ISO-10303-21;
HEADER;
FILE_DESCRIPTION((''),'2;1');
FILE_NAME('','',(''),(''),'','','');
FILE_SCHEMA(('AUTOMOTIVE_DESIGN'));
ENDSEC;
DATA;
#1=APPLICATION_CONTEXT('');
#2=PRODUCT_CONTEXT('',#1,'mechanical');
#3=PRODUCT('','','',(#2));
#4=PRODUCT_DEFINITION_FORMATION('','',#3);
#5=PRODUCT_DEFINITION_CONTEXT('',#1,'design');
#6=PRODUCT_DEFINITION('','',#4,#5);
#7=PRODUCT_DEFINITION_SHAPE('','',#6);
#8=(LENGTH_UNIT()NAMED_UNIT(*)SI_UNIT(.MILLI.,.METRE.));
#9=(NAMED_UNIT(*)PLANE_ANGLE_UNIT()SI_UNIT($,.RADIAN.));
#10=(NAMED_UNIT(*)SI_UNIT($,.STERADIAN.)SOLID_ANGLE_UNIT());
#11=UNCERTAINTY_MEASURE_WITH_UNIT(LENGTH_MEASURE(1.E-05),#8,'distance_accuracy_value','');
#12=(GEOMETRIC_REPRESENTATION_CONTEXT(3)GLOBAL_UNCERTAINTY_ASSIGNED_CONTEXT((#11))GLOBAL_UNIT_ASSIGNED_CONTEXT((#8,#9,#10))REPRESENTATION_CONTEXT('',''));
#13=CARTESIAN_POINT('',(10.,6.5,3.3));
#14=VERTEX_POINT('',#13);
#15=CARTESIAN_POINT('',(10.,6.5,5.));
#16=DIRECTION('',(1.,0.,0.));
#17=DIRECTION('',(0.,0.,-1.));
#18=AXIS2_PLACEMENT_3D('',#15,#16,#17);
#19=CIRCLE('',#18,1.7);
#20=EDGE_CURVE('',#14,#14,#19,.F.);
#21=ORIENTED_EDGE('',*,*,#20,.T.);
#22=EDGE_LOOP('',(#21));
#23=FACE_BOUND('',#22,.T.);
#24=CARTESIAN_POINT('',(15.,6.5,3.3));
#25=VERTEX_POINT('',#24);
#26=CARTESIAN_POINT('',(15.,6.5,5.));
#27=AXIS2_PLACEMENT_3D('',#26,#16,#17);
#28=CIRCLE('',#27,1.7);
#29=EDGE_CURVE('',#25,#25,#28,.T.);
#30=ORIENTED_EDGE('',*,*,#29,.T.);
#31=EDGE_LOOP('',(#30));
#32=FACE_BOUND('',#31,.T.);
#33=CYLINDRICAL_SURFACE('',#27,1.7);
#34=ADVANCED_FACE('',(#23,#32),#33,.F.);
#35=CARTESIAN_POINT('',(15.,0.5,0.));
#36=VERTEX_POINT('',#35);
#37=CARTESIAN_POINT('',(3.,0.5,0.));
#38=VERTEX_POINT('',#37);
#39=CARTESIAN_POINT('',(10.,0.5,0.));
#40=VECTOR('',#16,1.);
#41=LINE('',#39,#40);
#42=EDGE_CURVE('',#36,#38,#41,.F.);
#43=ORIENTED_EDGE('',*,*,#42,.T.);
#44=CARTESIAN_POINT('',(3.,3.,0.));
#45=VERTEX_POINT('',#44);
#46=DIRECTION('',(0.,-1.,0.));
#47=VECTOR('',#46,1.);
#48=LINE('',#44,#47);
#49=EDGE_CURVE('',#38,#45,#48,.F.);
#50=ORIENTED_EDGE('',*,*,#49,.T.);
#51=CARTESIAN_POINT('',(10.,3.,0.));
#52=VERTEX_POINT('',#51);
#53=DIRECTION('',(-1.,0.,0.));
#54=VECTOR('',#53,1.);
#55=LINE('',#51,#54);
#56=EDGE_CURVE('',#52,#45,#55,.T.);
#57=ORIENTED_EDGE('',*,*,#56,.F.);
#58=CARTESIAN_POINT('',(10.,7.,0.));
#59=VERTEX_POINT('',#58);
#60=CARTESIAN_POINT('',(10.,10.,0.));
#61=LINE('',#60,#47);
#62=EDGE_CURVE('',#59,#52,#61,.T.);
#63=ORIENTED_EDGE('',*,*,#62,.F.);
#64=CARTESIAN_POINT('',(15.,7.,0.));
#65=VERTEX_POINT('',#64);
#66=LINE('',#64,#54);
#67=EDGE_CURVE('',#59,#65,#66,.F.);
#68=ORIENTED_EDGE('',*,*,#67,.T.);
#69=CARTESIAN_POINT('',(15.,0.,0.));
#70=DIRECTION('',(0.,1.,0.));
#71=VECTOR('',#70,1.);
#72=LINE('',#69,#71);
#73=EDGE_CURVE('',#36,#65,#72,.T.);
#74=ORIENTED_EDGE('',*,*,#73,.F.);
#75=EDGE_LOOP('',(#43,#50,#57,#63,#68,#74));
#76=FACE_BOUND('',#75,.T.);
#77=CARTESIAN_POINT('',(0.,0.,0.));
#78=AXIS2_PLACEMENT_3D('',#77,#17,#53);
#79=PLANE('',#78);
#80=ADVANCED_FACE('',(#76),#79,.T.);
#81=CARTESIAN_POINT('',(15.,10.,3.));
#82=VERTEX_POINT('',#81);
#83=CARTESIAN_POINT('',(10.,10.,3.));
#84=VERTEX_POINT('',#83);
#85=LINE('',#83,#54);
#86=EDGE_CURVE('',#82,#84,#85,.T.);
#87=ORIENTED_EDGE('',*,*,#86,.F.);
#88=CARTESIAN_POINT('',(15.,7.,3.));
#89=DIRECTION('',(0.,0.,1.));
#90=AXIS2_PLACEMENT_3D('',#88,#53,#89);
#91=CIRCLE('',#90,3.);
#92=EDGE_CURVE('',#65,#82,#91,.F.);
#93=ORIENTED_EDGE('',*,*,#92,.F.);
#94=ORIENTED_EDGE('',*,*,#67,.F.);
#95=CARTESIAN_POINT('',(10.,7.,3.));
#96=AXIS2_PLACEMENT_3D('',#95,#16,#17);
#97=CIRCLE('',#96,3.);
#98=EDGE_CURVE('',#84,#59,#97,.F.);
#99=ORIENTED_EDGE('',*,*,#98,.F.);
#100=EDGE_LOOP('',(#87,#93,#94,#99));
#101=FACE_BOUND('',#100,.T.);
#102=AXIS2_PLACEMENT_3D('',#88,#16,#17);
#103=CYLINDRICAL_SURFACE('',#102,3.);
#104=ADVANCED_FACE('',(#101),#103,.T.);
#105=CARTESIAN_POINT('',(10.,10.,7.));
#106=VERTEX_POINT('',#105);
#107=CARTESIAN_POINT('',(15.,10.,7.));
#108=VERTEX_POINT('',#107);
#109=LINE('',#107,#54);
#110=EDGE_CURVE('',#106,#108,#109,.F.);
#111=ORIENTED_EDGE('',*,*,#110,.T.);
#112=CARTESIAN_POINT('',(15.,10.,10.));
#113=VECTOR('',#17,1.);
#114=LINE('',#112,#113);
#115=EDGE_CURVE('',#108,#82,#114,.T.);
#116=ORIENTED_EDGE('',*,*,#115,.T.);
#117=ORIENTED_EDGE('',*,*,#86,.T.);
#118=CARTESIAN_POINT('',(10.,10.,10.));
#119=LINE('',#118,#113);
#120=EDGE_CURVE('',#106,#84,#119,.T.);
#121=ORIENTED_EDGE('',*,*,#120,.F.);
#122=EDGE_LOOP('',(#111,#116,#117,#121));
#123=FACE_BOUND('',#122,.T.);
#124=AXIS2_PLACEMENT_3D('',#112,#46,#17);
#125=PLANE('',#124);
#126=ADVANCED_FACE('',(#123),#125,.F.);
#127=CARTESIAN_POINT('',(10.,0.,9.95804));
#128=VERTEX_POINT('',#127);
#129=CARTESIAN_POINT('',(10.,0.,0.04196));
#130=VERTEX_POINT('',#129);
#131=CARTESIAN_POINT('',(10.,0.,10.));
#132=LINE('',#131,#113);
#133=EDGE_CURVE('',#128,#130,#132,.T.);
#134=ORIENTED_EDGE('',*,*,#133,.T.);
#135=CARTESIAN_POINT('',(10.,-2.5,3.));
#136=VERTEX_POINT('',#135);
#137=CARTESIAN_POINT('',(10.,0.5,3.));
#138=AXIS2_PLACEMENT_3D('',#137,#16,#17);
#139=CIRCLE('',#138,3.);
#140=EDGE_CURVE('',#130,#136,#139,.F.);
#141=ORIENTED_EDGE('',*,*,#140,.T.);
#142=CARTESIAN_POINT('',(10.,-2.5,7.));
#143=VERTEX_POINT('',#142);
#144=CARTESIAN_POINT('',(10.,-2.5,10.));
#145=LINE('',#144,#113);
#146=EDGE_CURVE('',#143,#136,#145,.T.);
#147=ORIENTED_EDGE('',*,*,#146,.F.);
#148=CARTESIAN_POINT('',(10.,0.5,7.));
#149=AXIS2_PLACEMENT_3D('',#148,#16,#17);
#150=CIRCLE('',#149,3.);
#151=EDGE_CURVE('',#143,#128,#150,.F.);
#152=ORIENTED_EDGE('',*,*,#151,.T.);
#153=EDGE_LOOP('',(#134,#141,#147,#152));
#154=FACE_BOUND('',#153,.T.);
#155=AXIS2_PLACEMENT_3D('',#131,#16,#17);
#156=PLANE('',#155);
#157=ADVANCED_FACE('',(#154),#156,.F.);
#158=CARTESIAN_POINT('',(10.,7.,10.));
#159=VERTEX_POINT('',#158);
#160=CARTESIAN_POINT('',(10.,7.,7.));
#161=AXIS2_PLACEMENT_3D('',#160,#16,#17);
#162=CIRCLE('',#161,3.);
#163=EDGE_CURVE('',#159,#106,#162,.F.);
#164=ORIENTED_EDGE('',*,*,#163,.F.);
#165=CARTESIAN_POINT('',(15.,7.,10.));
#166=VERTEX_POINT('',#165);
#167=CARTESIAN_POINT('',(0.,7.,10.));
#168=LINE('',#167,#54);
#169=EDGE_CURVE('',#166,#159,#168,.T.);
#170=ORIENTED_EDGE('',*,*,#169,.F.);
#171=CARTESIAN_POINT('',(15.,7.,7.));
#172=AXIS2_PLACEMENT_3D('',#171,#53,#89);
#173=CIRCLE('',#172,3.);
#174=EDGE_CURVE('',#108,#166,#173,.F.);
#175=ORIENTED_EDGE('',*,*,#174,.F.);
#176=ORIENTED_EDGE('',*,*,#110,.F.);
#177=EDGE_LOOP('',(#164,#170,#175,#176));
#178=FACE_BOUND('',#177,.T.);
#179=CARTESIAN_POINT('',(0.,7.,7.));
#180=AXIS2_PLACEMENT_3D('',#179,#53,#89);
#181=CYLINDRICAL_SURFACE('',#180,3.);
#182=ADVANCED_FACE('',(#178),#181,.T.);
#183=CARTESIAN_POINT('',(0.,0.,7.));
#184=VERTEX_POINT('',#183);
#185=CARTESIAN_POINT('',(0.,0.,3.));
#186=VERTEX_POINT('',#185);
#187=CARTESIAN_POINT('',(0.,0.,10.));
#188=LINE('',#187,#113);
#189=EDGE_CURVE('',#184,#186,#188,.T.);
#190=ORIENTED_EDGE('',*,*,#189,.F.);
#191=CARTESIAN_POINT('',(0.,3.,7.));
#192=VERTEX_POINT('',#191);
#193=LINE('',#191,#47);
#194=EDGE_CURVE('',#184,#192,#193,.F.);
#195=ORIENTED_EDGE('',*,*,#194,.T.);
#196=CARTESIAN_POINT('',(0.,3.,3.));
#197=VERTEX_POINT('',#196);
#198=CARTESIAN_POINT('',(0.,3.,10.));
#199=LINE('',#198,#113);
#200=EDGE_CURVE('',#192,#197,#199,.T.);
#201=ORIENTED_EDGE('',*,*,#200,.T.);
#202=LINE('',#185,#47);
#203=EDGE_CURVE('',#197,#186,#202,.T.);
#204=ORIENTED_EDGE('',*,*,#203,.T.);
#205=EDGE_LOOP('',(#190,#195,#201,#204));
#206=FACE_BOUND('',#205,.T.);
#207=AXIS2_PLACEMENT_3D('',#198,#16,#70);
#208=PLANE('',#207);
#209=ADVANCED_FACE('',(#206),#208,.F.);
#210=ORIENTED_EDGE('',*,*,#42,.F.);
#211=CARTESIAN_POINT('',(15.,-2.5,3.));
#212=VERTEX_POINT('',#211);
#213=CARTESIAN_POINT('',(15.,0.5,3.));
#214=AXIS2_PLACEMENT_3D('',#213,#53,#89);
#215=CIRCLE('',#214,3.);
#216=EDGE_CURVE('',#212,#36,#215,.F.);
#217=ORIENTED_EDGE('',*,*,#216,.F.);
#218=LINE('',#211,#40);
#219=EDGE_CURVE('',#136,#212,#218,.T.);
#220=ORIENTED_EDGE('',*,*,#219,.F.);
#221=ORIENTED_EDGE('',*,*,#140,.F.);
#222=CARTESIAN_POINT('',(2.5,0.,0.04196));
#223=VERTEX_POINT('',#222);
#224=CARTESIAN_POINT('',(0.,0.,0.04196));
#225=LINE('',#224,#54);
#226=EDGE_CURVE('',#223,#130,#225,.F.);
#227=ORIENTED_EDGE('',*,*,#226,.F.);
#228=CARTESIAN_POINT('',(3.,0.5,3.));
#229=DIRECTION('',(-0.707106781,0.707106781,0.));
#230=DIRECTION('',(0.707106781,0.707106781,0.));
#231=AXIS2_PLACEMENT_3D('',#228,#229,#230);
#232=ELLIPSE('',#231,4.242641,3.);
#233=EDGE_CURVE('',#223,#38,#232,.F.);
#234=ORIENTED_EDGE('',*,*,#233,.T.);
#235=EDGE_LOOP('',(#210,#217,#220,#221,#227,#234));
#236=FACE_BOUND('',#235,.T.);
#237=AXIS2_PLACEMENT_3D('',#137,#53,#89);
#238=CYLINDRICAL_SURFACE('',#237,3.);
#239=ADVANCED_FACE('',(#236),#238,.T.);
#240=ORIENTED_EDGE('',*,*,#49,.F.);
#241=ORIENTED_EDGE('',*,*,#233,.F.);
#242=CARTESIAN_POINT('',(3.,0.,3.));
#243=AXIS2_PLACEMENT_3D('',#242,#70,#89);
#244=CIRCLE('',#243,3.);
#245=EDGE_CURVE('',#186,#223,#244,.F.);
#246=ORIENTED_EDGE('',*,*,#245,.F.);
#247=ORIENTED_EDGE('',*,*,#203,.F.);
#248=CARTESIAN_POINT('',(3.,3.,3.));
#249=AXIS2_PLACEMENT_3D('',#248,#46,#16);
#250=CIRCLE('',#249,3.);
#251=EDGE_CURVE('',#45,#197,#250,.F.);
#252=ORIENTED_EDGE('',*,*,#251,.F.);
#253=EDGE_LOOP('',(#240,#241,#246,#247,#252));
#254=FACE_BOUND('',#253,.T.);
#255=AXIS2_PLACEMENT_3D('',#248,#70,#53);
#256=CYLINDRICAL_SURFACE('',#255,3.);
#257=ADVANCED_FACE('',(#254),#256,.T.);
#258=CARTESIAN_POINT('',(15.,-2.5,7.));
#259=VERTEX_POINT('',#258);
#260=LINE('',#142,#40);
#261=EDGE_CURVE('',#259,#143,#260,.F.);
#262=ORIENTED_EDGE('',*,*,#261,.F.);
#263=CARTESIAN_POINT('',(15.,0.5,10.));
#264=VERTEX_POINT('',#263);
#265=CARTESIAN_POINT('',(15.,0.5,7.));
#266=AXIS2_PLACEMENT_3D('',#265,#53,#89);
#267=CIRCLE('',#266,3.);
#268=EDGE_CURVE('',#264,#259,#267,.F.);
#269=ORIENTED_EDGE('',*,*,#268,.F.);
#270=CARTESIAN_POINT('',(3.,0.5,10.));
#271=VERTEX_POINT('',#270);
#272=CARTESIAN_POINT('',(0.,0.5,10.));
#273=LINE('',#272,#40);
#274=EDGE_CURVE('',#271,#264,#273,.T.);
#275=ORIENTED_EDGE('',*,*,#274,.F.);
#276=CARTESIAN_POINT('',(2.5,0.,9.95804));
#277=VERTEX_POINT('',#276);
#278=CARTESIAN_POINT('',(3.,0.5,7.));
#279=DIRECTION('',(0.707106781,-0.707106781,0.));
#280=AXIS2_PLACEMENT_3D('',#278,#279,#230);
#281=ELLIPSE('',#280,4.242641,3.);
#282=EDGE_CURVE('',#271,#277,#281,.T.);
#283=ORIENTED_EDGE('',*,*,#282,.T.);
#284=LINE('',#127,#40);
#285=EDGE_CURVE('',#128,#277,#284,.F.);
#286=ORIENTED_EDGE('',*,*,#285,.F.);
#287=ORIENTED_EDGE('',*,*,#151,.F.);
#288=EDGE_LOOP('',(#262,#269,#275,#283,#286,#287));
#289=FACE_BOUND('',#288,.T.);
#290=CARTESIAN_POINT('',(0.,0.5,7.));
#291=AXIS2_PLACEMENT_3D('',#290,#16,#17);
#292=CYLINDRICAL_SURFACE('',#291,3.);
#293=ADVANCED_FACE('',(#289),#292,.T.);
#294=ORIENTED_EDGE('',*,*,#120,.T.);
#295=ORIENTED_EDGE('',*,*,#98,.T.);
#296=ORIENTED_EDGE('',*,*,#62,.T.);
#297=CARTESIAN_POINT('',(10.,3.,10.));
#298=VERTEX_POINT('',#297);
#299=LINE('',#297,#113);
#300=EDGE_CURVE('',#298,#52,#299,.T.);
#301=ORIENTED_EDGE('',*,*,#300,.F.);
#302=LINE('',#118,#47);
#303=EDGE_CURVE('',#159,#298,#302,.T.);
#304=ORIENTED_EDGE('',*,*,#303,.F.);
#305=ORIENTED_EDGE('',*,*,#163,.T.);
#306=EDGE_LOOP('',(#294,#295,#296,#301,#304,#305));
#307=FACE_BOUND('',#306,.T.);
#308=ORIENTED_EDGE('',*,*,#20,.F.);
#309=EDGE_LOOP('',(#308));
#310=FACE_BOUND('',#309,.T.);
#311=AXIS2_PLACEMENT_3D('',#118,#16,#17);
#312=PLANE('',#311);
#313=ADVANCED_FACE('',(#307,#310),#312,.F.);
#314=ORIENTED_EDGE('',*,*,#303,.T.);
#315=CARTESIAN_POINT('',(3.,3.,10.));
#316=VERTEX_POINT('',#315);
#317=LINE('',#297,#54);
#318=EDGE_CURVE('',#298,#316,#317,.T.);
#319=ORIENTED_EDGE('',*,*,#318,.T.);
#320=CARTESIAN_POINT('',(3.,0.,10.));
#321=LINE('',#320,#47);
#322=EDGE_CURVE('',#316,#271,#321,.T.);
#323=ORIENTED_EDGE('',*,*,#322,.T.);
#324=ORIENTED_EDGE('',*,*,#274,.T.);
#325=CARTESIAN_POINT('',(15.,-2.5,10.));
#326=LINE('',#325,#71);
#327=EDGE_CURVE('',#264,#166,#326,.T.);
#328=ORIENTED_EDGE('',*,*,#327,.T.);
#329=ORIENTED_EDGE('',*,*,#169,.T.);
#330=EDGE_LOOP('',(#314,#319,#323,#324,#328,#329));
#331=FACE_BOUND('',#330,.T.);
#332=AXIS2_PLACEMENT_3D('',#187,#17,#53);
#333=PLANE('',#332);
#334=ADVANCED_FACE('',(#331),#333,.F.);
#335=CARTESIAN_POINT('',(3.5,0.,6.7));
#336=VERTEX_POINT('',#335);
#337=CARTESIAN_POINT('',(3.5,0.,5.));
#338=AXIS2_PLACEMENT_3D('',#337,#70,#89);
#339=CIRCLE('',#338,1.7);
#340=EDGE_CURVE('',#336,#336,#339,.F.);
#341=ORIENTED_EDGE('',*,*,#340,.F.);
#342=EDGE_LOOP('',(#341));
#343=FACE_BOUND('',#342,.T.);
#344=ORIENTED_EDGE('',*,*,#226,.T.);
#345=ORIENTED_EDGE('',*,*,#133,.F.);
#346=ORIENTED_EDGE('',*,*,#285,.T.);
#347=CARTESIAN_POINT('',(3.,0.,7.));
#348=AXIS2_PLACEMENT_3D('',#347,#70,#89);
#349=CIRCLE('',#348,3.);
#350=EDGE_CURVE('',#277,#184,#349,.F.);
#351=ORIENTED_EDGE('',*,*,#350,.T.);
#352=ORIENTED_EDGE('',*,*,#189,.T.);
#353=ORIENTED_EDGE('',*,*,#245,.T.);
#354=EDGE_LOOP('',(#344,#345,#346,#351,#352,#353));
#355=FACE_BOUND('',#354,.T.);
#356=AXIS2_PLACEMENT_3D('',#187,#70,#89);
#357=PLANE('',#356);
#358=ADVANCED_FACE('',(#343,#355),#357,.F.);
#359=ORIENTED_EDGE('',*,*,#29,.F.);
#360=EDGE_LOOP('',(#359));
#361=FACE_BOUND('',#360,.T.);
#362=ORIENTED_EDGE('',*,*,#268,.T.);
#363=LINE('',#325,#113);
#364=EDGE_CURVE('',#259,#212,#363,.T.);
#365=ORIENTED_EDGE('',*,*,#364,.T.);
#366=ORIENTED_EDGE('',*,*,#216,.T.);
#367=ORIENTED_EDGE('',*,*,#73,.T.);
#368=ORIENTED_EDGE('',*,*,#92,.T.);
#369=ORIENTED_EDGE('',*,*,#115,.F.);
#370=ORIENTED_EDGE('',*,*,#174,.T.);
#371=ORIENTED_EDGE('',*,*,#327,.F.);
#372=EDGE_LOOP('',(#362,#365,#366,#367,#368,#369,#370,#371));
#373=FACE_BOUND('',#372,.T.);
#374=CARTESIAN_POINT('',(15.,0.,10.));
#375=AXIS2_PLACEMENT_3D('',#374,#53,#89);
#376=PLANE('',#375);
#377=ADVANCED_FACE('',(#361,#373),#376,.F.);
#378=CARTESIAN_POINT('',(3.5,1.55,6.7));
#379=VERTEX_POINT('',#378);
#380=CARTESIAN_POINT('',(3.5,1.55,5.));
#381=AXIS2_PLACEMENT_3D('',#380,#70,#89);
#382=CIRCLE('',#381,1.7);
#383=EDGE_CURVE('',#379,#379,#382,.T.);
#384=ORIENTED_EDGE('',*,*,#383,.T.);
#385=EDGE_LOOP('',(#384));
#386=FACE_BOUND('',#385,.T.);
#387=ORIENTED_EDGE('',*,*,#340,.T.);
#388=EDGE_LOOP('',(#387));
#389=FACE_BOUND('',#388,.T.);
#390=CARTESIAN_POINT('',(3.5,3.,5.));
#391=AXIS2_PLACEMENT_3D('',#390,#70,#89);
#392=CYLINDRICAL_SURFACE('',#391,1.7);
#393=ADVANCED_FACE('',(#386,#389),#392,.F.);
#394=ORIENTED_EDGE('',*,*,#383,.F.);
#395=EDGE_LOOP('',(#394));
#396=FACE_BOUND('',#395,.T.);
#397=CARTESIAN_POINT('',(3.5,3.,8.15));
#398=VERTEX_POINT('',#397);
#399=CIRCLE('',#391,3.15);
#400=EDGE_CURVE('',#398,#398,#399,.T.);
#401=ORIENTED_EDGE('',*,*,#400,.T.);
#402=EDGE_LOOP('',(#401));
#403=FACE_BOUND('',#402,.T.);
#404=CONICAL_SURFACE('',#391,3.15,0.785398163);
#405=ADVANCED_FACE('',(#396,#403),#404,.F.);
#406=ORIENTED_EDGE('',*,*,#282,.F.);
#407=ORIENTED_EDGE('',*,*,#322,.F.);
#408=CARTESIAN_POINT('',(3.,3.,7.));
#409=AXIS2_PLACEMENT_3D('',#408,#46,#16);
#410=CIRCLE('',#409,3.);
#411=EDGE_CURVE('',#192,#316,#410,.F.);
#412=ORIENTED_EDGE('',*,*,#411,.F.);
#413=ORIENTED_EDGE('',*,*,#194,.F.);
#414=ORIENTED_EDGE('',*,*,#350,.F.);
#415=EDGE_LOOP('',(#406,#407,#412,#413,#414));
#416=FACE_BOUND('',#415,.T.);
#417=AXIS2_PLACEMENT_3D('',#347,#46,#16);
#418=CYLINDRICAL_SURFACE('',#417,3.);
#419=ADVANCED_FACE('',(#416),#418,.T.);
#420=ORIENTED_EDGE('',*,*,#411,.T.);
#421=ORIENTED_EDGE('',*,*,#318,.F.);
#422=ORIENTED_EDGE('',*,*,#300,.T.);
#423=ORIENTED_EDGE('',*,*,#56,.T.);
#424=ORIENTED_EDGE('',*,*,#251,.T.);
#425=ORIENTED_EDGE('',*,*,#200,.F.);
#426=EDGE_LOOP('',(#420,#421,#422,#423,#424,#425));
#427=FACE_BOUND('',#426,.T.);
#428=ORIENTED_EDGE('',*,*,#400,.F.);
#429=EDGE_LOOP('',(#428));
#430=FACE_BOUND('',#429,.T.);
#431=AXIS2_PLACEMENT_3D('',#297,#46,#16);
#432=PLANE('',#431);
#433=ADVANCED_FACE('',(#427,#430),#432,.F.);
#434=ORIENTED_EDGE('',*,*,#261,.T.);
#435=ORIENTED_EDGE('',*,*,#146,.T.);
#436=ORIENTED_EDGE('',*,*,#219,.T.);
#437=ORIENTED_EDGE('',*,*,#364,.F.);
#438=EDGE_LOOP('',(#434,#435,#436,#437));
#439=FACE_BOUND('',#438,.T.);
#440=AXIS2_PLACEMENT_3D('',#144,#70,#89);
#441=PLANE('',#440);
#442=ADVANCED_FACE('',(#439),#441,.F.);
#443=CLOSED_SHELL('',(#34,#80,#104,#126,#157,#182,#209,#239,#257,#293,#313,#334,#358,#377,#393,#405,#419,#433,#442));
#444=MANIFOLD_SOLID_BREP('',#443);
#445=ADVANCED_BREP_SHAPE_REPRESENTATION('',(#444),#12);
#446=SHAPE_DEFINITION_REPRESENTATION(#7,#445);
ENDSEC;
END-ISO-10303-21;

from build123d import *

# Parameters (mm, degrees)
BOSS_EXTRU_1_DEPTH                             = 10
ESQUISSE2_R                                    = 1.5
ENL_V_MAT_EXTRU_1_DEPTH                        = 5
ESQUISSE3_R                                    = 1.5
ENL_V_MAT_EXTRU_2_DEPTH                        = 3
D_GAGEMENT_M31_D                               = 3.4
D_GAGEMENT_M31_DEPTH                           = 5
D_GAGEMENT_M31_TIP                             = 1.021463052
FRAISAGE_POUR_VIS_T_TE_FRAIS_E_M31_D           = 3.4
FRAISAGE_POUR_VIS_T_TE_FRAIS_E_M31_DEPTH       = 3
FRAISAGE_POUR_VIS_T_TE_FRAIS_E_M31_CSINK_D     = 6.3
FRAISAGE_POUR_VIS_T_TE_FRAIS_E_M31_CSINK_ANGLE = 90
FRAISAGE_POUR_VIS_T_TE_FRAIS_E_M31_TIP         = 1.021463052
CONG_1_R                                       = 3


with BuildPart() as part:
    # Esquisse1 → Boss.-Extru.1 (new body)
    with BuildSketch(Plane.XY):
        Polygon((15, 0), (15, 10), (10, 10), (10, 3), (0, 3), (0, 0), (10, 0), (10, -2.5), (15, -2.5), align=None)
    extrude(amount=BOSS_EXTRU_1_DEPTH)

    # Esquisse2 → Enlèv. mat.-Extru.1 (cut)
    with BuildSketch(Plane(origin=(15, 0, 0), x_dir=(0, 0, -1), z_dir=(1, 0, 0))):
        with Locations((-5, 6.5)):
            Circle(ESQUISSE2_R)
    extrude(amount=-ENL_V_MAT_EXTRU_1_DEPTH, mode=Mode.SUBTRACT)

    # Esquisse3 → Enlèv. mat.-Extru.2 (cut)
    with BuildSketch(Plane(origin=(0, 3, 0), x_dir=(1, 0, 0), z_dir=(0, 1, 0))):
        with Locations(Location((3.5, -5, 0), (0, 0, 180))):
            Circle(ESQUISSE3_R)
    extrude(amount=-ENL_V_MAT_EXTRU_2_DEPTH, mode=Mode.SUBTRACT)

    # Dégagement M31
    with Locations(Plane(origin=(15, 0, 0), x_dir=(0, 0, -1), z_dir=(1, 0, 0))):
        with Locations((-5, 6.5)):
            Hole(D_GAGEMENT_M31_D / 2, depth=D_GAGEMENT_M31_DEPTH)
            with Locations((0, 0, -(D_GAGEMENT_M31_DEPTH + D_GAGEMENT_M31_TIP / 2))):  # 118° drill point
                Cone(0, D_GAGEMENT_M31_D / 2, D_GAGEMENT_M31_TIP, mode=Mode.SUBTRACT)

    # Fraisage pour vis à tête fraisée M31
    with Locations(Plane(origin=(0, 3, 0), x_dir=(1, 0, 0), z_dir=(0, 1, 0))):
        with Locations((3.5, -5)):
            CounterSinkHole(FRAISAGE_POUR_VIS_T_TE_FRAIS_E_M31_D / 2, FRAISAGE_POUR_VIS_T_TE_FRAIS_E_M31_CSINK_D / 2, depth=FRAISAGE_POUR_VIS_T_TE_FRAIS_E_M31_DEPTH, counter_sink_angle=FRAISAGE_POUR_VIS_T_TE_FRAIS_E_M31_CSINK_ANGLE)
            with Locations((0, 0, -(FRAISAGE_POUR_VIS_T_TE_FRAIS_E_M31_DEPTH + FRAISAGE_POUR_VIS_T_TE_FRAIS_E_M31_TIP / 2))):  # 118° drill point
                Cone(0, FRAISAGE_POUR_VIS_T_TE_FRAIS_E_M31_D / 2, FRAISAGE_POUR_VIS_T_TE_FRAIS_E_M31_TIP, mode=Mode.SUBTRACT)

    # Congé1
    # the kernel refuses this fillet: 3 mm, written as the material it takes off along each edge
    with BuildSketch(Plane(origin=(0, 10.5, 10), x_dir=(0, 0, -1), z_dir=(0, -1, 0))) as cong_1_piece_1:
        with BuildLine():
            CenterArc((CONG_1_R, CONG_1_R), CONG_1_R, 180, 90)
            Line((0, CONG_1_R), (0, 0))
            Line((0, 0), (CONG_1_R, 0))
        make_face()
    extrude(amount=18, mode=Mode.SUBTRACT)
    with BuildSketch(Plane(origin=(0, 10.5, 0), x_dir=(0, 0, 1), z_dir=(0, -1, 0))) as cong_1_piece_2:
        with BuildLine():
            CenterArc((CONG_1_R, -CONG_1_R), CONG_1_R, 90, 90)
            Line((0, -CONG_1_R), (0, 0))
            Line((0, 0), (CONG_1_R, 0))
        make_face()
    extrude(amount=18, mode=Mode.SUBTRACT)
    with BuildSketch(Plane(origin=(22.5, 10, 0), x_dir=(0, -1, 0), z_dir=(-1, 0, 0)), Plane(origin=(2.5, -2.5, 10), x_dir=(0, 0, -1), z_dir=(1, 0, 0))) as cong_1_piece_3:
        with BuildLine():
            CenterArc((CONG_1_R, CONG_1_R), CONG_1_R, 180, 90)
            Line((0, CONG_1_R), (0, 0))
            Line((0, 0), (CONG_1_R, 0))
        make_face()
    extrude(amount=20, mode=Mode.SUBTRACT)
    with BuildSketch(Plane(origin=(22.5, 10, 10), x_dir=(0, -1, 0), z_dir=(-1, 0, 0)), Plane(origin=(2.5, -2.5, 0), x_dir=(0, 0, 1), z_dir=(1, 0, 0))) as cong_1_piece_4:
        with BuildLine():
            CenterArc((CONG_1_R, -CONG_1_R), CONG_1_R, 90, 90)
            Line((0, -CONG_1_R), (0, 0))
            Line((0, 0), (CONG_1_R, 0))
        make_face()
    extrude(amount=20, mode=Mode.SUBTRACT)


solid = part.part
